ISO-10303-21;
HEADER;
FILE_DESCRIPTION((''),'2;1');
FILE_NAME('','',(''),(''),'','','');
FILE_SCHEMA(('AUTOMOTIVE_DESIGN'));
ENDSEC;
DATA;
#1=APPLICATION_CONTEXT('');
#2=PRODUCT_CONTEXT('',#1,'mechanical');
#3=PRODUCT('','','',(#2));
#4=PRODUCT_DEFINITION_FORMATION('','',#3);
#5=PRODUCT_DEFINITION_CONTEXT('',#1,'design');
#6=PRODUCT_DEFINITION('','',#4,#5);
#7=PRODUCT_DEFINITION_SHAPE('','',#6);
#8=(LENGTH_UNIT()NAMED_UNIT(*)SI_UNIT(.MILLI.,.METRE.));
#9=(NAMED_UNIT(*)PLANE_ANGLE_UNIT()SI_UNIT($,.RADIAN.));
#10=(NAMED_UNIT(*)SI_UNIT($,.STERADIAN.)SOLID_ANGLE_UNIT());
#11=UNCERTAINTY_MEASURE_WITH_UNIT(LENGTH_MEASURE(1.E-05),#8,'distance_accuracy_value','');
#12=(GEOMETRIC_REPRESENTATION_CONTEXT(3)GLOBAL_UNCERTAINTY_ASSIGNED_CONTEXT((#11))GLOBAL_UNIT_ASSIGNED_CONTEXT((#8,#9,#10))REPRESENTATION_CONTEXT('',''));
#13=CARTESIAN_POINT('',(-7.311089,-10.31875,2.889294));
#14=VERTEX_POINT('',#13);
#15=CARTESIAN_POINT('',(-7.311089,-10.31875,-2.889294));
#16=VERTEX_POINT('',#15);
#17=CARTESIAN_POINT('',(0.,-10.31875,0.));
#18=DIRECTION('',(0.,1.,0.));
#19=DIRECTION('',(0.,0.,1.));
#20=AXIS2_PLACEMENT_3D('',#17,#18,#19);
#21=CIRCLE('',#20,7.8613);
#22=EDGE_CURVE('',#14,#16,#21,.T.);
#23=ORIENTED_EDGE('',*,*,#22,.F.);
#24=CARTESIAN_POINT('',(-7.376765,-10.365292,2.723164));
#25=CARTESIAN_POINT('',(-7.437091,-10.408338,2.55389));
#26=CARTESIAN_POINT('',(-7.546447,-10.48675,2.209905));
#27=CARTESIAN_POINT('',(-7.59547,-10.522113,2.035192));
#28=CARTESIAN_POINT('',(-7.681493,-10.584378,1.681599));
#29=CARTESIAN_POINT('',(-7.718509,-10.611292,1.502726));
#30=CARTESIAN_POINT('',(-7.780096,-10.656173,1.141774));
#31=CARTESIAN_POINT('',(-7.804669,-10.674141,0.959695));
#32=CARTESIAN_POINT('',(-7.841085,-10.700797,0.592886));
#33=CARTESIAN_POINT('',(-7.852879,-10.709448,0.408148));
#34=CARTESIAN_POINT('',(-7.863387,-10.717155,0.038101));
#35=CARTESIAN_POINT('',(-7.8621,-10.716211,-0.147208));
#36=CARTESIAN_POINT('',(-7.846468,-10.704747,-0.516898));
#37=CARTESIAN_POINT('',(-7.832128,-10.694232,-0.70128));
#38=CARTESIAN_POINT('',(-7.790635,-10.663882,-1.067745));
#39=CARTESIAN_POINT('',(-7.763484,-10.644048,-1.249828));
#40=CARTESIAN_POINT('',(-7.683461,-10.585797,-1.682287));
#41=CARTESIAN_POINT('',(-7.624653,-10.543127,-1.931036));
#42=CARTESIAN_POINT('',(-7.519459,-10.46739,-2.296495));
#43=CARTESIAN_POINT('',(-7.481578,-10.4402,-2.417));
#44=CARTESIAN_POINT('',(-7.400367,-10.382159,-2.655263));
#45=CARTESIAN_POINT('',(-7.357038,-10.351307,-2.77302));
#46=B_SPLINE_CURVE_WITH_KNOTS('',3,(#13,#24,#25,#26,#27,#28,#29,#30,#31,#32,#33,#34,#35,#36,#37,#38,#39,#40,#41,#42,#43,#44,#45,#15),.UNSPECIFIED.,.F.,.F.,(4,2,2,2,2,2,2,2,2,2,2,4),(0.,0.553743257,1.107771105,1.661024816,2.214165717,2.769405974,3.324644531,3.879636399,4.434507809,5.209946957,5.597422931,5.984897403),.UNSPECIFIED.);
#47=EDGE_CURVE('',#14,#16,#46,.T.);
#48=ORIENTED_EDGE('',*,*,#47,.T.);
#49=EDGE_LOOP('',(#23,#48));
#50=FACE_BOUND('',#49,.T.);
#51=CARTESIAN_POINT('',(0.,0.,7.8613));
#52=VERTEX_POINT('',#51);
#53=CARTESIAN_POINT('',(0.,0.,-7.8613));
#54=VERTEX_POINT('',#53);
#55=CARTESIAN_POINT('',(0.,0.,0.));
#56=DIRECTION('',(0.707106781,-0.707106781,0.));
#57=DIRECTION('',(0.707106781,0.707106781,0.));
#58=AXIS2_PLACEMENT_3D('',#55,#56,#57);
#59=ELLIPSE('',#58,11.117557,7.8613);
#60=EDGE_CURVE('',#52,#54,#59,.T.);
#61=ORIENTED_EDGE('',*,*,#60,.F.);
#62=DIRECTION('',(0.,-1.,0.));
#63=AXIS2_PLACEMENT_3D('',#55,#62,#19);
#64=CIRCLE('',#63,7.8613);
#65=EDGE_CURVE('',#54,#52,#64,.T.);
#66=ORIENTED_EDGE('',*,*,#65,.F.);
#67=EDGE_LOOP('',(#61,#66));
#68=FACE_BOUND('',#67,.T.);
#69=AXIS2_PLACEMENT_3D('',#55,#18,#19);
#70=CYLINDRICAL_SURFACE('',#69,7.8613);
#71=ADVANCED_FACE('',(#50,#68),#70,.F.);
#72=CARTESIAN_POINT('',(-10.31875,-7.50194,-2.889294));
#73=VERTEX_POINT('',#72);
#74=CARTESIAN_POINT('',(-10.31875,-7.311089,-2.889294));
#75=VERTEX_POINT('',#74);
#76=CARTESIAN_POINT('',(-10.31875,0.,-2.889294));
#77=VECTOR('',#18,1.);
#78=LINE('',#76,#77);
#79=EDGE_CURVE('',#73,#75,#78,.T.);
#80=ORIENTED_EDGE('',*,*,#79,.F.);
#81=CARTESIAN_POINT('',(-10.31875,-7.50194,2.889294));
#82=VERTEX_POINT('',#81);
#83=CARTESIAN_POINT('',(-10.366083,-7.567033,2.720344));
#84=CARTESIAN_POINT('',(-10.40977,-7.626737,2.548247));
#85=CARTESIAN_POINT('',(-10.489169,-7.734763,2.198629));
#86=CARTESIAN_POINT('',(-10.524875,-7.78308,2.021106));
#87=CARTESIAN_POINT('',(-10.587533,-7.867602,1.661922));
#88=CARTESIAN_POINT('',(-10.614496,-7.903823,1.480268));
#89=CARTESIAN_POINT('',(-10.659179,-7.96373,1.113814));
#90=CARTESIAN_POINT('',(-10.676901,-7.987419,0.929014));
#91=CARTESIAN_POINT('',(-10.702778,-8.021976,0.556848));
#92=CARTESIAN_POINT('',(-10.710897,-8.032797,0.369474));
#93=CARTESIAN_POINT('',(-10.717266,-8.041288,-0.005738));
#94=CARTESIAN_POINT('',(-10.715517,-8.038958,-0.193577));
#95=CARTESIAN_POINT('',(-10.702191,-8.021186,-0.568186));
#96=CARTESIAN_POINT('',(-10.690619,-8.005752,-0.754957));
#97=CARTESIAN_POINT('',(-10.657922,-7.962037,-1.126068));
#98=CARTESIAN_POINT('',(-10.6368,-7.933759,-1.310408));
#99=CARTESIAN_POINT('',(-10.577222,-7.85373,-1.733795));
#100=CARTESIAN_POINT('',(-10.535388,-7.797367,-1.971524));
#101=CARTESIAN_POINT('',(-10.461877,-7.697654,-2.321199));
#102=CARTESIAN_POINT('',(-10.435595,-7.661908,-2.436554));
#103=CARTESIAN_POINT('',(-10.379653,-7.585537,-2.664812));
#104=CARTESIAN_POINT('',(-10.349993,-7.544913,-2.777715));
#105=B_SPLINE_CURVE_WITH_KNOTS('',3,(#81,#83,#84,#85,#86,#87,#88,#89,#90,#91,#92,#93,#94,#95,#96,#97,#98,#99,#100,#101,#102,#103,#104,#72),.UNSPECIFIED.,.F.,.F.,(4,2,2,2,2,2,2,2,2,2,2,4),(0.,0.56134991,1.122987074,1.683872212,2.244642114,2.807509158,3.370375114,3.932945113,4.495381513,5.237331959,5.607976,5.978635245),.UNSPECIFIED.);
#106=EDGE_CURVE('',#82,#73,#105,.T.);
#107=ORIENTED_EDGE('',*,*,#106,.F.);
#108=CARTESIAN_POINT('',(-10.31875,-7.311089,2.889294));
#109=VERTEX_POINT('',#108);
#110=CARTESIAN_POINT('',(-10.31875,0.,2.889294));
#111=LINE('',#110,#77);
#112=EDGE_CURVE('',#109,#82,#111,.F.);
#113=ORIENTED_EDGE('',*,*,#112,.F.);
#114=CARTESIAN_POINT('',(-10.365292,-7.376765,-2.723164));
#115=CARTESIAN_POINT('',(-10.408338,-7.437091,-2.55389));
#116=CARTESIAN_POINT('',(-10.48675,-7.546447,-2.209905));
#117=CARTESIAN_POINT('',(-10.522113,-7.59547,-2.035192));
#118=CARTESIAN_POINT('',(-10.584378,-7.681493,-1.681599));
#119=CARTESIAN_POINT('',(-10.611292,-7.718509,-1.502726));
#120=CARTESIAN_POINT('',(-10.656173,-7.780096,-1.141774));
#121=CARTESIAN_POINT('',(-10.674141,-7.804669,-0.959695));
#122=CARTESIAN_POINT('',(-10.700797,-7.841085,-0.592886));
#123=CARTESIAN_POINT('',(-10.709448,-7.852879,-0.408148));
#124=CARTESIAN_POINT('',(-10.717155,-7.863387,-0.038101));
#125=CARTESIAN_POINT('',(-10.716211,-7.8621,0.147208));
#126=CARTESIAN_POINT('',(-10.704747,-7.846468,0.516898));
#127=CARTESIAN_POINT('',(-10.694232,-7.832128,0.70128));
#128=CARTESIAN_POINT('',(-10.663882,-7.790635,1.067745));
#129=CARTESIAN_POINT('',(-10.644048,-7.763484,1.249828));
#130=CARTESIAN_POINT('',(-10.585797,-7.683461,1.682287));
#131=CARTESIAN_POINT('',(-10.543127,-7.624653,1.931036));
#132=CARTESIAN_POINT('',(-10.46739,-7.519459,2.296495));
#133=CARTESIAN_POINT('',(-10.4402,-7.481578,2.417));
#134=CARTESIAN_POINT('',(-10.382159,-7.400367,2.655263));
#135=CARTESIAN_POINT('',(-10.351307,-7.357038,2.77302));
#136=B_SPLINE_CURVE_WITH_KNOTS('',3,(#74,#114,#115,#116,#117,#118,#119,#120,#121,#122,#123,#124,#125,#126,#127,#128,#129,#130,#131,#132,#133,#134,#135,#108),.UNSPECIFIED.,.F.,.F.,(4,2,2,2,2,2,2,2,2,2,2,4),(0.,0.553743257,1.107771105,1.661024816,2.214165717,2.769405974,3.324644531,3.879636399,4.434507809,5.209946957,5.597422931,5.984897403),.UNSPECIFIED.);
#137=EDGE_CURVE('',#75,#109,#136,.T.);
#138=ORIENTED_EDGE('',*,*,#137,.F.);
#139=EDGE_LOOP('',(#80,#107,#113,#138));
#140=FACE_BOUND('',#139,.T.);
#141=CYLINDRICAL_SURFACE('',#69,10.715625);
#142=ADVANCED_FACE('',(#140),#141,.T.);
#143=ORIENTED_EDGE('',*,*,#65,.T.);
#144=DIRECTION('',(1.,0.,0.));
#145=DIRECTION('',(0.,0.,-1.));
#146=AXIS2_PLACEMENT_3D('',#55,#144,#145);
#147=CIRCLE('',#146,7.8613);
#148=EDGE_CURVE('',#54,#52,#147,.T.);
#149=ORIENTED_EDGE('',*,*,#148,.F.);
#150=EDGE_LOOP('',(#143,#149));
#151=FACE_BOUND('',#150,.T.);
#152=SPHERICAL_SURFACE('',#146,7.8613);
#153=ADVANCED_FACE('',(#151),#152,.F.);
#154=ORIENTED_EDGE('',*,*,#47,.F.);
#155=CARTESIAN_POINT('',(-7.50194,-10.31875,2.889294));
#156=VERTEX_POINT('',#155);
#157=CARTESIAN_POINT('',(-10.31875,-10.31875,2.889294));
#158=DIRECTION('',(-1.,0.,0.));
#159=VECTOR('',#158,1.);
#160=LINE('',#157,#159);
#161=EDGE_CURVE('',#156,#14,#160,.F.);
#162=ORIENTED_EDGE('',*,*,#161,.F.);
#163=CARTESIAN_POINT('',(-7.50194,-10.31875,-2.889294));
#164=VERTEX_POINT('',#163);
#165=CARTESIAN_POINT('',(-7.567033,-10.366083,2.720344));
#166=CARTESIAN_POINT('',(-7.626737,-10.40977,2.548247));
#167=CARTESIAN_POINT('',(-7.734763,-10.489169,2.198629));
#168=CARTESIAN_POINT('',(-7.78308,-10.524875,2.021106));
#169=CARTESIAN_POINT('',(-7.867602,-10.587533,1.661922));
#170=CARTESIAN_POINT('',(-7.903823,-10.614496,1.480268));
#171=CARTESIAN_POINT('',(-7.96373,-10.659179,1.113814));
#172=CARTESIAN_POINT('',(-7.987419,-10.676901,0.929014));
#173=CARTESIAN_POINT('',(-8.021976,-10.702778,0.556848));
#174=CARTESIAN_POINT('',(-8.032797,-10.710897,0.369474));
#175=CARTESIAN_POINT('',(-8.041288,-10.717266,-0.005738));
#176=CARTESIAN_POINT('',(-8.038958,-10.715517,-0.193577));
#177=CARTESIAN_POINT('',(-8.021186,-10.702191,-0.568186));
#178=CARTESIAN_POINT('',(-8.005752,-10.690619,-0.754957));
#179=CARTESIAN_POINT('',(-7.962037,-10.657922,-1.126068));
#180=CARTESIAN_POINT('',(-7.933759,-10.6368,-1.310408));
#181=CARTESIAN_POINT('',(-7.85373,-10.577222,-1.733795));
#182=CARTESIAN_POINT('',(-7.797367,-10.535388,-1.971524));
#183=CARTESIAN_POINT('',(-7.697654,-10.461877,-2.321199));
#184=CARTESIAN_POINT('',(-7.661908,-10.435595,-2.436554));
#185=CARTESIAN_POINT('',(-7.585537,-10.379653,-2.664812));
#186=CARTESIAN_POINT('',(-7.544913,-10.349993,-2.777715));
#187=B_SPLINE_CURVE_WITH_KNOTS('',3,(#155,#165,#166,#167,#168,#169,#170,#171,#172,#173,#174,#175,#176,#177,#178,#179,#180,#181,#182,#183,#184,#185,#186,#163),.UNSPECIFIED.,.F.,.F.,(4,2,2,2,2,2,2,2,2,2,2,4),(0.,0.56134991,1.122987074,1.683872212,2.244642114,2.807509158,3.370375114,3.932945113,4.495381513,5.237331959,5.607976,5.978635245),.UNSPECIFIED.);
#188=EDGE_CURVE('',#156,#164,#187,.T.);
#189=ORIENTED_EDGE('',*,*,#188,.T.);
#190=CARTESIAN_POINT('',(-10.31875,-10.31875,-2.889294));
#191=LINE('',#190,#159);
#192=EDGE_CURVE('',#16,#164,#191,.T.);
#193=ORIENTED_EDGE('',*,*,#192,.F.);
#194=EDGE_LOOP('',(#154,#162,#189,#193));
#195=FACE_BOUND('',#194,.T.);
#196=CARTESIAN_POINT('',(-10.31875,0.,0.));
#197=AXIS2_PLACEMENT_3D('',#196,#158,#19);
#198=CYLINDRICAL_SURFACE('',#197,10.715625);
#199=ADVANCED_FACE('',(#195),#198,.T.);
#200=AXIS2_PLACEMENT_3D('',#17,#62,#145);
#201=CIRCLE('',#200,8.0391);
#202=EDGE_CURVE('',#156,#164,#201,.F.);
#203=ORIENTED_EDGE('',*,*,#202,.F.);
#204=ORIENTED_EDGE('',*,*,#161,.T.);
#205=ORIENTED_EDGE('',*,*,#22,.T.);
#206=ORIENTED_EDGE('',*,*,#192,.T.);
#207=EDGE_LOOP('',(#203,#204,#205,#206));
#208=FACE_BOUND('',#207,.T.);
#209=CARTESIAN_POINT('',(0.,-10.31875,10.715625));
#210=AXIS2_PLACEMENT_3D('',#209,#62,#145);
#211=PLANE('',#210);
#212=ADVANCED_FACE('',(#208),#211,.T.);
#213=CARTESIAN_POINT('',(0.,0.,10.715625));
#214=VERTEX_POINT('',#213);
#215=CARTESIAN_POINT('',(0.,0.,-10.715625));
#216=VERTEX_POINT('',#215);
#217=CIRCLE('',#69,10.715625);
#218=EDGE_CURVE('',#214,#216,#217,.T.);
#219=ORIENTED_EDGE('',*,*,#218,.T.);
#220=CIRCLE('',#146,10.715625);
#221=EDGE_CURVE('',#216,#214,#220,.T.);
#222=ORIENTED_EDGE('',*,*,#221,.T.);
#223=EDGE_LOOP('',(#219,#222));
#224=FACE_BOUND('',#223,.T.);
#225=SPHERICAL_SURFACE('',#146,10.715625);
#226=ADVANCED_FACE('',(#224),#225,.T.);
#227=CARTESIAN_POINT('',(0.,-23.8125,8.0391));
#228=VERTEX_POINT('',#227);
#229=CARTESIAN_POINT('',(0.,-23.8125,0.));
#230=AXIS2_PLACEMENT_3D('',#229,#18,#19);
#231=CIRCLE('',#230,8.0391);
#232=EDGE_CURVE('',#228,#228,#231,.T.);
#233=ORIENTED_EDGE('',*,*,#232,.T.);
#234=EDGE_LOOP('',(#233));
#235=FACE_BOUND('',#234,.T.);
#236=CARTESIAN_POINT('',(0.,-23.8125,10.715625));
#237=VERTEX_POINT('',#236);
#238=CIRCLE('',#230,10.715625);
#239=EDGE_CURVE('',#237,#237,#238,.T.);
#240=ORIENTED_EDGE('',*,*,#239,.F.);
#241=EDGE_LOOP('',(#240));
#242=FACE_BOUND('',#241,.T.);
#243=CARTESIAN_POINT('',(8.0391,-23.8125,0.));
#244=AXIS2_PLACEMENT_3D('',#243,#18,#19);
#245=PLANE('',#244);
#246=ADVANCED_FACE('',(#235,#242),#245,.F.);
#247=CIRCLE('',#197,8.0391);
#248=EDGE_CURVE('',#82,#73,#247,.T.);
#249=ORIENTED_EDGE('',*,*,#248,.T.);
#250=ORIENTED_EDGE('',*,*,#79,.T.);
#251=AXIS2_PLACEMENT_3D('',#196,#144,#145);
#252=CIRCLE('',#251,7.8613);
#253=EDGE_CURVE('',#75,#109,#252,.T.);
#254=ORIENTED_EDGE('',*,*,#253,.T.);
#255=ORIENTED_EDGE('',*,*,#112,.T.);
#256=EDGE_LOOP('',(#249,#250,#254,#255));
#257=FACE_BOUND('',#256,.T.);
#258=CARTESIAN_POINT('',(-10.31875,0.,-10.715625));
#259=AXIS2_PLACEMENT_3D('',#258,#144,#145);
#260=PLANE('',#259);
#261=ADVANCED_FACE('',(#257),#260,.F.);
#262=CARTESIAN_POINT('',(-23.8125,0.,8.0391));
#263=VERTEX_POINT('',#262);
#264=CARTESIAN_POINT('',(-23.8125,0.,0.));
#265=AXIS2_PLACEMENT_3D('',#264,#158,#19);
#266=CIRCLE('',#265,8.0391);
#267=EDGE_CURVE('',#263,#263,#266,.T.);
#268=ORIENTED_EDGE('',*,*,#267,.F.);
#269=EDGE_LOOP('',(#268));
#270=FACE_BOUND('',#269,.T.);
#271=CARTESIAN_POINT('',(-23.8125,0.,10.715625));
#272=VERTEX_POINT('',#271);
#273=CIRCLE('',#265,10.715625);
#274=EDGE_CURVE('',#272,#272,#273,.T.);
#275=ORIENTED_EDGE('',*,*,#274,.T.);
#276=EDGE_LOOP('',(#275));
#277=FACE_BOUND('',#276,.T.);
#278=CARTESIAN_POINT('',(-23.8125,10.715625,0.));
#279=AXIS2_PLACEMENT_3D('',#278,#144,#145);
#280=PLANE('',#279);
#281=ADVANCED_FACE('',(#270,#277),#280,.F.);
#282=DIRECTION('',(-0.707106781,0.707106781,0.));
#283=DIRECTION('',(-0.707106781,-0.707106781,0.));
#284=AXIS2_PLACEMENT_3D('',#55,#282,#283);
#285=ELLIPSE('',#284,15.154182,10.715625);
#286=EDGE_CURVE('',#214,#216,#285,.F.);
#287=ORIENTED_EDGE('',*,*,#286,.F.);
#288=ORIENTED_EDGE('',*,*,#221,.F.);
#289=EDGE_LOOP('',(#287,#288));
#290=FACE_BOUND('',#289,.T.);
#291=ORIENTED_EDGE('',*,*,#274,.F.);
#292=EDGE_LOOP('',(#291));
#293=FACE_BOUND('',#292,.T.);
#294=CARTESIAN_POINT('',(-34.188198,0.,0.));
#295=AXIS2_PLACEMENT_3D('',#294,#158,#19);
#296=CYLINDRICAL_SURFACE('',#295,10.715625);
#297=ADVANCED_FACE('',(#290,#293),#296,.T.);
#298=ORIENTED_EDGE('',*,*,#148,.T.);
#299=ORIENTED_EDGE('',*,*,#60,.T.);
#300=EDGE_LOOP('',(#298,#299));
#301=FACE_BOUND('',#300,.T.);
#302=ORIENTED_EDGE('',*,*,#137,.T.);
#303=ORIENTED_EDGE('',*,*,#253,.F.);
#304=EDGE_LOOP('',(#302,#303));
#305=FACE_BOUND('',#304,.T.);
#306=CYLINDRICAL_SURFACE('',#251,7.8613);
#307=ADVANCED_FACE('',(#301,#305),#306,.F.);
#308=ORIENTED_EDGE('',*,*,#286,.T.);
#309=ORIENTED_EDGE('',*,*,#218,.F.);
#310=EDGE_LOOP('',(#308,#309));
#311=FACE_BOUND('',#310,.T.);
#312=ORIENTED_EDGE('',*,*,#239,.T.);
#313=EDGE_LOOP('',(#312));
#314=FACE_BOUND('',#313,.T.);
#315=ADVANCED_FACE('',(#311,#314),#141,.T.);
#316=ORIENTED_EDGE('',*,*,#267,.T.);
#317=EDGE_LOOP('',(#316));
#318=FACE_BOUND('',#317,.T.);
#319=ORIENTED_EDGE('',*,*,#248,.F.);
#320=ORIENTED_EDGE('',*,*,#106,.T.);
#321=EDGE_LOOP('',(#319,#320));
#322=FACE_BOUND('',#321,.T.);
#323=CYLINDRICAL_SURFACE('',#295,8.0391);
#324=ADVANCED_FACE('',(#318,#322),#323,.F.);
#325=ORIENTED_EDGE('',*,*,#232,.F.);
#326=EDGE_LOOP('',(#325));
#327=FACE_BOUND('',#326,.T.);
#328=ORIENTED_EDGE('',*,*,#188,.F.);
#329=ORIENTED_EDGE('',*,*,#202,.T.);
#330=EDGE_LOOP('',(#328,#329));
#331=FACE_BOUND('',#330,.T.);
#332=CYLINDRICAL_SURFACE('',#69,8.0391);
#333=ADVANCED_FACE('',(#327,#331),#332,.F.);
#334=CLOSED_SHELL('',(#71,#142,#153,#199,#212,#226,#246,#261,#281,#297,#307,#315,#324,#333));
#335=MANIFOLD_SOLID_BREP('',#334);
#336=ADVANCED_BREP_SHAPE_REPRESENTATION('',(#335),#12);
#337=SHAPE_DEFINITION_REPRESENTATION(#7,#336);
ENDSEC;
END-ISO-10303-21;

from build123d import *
from build123d.topology import SkipClean

# Parameters (mm, degrees)
SKETCH1_W    = 13.493749999999999
SKETCH1_H    = 2.676524999999998
SWEEP2_ANGLE = 180
SKETCH12_R   = 7.861299999999998
SKETCH12_2_R = 7.861299999999998
SKETCH16_R   = 7.861299999999998
SKETCH16_2_R = 7.861299999999998


# Read off the part's stored shape, not the designer's step: Sweep2
with BuildPart() as part:
    # Sketch1 → Revolve1 (revolve)
    with BuildSketch(Plane.XY, mode=Mode.PRIVATE) as revolve1_sk:
        with Locations((-17.065625, 9.3773625)):
            Rectangle(SKETCH1_W, SKETCH1_H)
    revolve(revolve1_sk.sketch.rotate(Axis((-34.18819835941514, 0, 0), (1, 0, 0)), 90), axis=Axis((-34.18819835941514, 0, 0), (1, 0, 0)))

    # Sketch2 → Revolve2 (revolve)
    with BuildSketch(Plane.XY, mode=Mode.PRIVATE) as revolve2_sk:
        Polygon((8.039100000000003, -10.31875), (10.715625000000001, -10.31875), (10.715625000000003, -23.8125), (8.039100000000003, -23.8125), align=None)
    revolve(revolve2_sk.sketch.rotate(Axis((0, 0, 0), (0, -1, 0)), 90), axis=Axis((0, 0, 0), (0, -1, 0)))

    # Sweep2 outline → Sweep2 (revolve)
    with SkipClean():  # the faces are left unmerged after this step: merging them gives an invalid solid
        with BuildSketch(Plane(origin=(0, 0, 0), x_dir=(0, 6e-17, -1), z_dir=(0, -1, -6e-17))):
            with BuildLine():
                Line((10.715625, -10.31875), (10.715625, 0))
                ThreePointArc((10.715625, 0), (7.577091102, 7.577091102), (0, 10.715625))
                Line((0, 10.715625), (0, 7.8613))
                ThreePointArc((0, 7.8613), (5.558778539, 5.558778539), (7.8613, 0))
                Line((7.8613, 0), (7.8613, -10.31875))
                Line((7.8613, -10.31875), (10.715625, -10.31875))
            make_face()
        revolve(axis=Axis((0, 0, 0), (1, 0, 0)), revolution_arc=SWEEP2_ANGLE)

    # Sweep3: sweep along a path in Sketch9
    with SkipClean():  # the faces are left unmerged after this step: merging them gives an invalid solid
        with BuildLine(Plane.XZ) as sweep3_path:
            CenterArc((0, 0), 10.715625, 0, 360)
        # Sketch8 → Sweep3 (sweep)
        with BuildSketch(Plane(origin=(0, 0, 0), x_dir=(0, 0, -1), z_dir=(1, 0, 0))):
            Polygon((-10.715625000000003, 7e-17), (-7.861299999999998, 0), (-7.861299999999998, -10.318750000000001), (-10.715625000000003, -10.318750000000001), align=None)
        sweep(path=sweep3_path.line)

    # Sweep4: sweep along a path in Sketch10
    with BuildLine(Plane(origin=(-10.318750000000001, 0, 0), x_dir=(0, 0, -1), z_dir=(1, 0, 0))) as sweep4_path:
        ThreePointArc((-10.715625, -3.87e-15), (6.6e-16, -10.715625), (10.715625, -3.87e-15))
    # Sketch11 → Sweep4 (sweep)
    with BuildSketch(Plane.XZ):
        Polygon((-10.318750000000001, 10.715625), (1.19e-15, 10.715625), (1.54e-15, 7.861299999999998), (-10.318750000000001, 7.861299999999998), align=None)
    sweep(path=sweep4_path.line)

    # Cut-Sweep3: sweep along a path in Sketch14
    with BuildLine(Plane.XY) as cut_sweep3_path:
        Line((1.73e-15, 8.039100000000001), (-10.318750000000001, 8.0391))
    # Sketch12 → Cut-Sweep3 (sweep, cut)
    with BuildSketch(Plane.ZY.offset(10.318750000000001)):
        Circle(SKETCH12_R)
    sweep(path=cut_sweep3_path.line, mode=Mode.SUBTRACT)

    # Cut-Sweep4: sweep along a path in Sketch15
    with BuildLine(Plane.XY) as cut_sweep4_path:
        Line((-10.318750000000001, 5.616092889966187), (-23.8125, 5.616092889966185))
    # Sketch12<2> → Cut-Sweep4 (sweep, cut)
    with BuildSketch(Plane.ZY.offset(10.318750000000001)):
        Circle(SKETCH12_2_R)
    sweep(path=cut_sweep4_path.line, mode=Mode.SUBTRACT)

    # Cut-Sweep6: sweep along a path in Sketch17
    with BuildLine(Plane.XY) as cut_sweep6_path:
        Line((7.861299999999998, 0), (7.861299999999998, -10.318750000000001))
    # Sketch16 → Cut-Sweep6 (sweep, cut)
    with BuildSketch(Plane.XZ.offset(10.318750000000001)):
        Circle(SKETCH16_R)
    sweep(path=cut_sweep6_path.line, mode=Mode.SUBTRACT)

    # Cut-Sweep7: sweep along a path in Sketch18
    with BuildLine(Plane.XY) as cut_sweep7_path:
        Line((-7.861299999999989, -10.318750000000001), (-7.8612999999999875, -23.8125))
    # Sketch16<2> → Cut-Sweep7 (sweep, cut)
    with BuildSketch(Plane.XZ.offset(10.318750000000001)):
        Circle(SKETCH16_2_R)
    sweep(path=cut_sweep7_path.line, mode=Mode.SUBTRACT)


solid = part.part
